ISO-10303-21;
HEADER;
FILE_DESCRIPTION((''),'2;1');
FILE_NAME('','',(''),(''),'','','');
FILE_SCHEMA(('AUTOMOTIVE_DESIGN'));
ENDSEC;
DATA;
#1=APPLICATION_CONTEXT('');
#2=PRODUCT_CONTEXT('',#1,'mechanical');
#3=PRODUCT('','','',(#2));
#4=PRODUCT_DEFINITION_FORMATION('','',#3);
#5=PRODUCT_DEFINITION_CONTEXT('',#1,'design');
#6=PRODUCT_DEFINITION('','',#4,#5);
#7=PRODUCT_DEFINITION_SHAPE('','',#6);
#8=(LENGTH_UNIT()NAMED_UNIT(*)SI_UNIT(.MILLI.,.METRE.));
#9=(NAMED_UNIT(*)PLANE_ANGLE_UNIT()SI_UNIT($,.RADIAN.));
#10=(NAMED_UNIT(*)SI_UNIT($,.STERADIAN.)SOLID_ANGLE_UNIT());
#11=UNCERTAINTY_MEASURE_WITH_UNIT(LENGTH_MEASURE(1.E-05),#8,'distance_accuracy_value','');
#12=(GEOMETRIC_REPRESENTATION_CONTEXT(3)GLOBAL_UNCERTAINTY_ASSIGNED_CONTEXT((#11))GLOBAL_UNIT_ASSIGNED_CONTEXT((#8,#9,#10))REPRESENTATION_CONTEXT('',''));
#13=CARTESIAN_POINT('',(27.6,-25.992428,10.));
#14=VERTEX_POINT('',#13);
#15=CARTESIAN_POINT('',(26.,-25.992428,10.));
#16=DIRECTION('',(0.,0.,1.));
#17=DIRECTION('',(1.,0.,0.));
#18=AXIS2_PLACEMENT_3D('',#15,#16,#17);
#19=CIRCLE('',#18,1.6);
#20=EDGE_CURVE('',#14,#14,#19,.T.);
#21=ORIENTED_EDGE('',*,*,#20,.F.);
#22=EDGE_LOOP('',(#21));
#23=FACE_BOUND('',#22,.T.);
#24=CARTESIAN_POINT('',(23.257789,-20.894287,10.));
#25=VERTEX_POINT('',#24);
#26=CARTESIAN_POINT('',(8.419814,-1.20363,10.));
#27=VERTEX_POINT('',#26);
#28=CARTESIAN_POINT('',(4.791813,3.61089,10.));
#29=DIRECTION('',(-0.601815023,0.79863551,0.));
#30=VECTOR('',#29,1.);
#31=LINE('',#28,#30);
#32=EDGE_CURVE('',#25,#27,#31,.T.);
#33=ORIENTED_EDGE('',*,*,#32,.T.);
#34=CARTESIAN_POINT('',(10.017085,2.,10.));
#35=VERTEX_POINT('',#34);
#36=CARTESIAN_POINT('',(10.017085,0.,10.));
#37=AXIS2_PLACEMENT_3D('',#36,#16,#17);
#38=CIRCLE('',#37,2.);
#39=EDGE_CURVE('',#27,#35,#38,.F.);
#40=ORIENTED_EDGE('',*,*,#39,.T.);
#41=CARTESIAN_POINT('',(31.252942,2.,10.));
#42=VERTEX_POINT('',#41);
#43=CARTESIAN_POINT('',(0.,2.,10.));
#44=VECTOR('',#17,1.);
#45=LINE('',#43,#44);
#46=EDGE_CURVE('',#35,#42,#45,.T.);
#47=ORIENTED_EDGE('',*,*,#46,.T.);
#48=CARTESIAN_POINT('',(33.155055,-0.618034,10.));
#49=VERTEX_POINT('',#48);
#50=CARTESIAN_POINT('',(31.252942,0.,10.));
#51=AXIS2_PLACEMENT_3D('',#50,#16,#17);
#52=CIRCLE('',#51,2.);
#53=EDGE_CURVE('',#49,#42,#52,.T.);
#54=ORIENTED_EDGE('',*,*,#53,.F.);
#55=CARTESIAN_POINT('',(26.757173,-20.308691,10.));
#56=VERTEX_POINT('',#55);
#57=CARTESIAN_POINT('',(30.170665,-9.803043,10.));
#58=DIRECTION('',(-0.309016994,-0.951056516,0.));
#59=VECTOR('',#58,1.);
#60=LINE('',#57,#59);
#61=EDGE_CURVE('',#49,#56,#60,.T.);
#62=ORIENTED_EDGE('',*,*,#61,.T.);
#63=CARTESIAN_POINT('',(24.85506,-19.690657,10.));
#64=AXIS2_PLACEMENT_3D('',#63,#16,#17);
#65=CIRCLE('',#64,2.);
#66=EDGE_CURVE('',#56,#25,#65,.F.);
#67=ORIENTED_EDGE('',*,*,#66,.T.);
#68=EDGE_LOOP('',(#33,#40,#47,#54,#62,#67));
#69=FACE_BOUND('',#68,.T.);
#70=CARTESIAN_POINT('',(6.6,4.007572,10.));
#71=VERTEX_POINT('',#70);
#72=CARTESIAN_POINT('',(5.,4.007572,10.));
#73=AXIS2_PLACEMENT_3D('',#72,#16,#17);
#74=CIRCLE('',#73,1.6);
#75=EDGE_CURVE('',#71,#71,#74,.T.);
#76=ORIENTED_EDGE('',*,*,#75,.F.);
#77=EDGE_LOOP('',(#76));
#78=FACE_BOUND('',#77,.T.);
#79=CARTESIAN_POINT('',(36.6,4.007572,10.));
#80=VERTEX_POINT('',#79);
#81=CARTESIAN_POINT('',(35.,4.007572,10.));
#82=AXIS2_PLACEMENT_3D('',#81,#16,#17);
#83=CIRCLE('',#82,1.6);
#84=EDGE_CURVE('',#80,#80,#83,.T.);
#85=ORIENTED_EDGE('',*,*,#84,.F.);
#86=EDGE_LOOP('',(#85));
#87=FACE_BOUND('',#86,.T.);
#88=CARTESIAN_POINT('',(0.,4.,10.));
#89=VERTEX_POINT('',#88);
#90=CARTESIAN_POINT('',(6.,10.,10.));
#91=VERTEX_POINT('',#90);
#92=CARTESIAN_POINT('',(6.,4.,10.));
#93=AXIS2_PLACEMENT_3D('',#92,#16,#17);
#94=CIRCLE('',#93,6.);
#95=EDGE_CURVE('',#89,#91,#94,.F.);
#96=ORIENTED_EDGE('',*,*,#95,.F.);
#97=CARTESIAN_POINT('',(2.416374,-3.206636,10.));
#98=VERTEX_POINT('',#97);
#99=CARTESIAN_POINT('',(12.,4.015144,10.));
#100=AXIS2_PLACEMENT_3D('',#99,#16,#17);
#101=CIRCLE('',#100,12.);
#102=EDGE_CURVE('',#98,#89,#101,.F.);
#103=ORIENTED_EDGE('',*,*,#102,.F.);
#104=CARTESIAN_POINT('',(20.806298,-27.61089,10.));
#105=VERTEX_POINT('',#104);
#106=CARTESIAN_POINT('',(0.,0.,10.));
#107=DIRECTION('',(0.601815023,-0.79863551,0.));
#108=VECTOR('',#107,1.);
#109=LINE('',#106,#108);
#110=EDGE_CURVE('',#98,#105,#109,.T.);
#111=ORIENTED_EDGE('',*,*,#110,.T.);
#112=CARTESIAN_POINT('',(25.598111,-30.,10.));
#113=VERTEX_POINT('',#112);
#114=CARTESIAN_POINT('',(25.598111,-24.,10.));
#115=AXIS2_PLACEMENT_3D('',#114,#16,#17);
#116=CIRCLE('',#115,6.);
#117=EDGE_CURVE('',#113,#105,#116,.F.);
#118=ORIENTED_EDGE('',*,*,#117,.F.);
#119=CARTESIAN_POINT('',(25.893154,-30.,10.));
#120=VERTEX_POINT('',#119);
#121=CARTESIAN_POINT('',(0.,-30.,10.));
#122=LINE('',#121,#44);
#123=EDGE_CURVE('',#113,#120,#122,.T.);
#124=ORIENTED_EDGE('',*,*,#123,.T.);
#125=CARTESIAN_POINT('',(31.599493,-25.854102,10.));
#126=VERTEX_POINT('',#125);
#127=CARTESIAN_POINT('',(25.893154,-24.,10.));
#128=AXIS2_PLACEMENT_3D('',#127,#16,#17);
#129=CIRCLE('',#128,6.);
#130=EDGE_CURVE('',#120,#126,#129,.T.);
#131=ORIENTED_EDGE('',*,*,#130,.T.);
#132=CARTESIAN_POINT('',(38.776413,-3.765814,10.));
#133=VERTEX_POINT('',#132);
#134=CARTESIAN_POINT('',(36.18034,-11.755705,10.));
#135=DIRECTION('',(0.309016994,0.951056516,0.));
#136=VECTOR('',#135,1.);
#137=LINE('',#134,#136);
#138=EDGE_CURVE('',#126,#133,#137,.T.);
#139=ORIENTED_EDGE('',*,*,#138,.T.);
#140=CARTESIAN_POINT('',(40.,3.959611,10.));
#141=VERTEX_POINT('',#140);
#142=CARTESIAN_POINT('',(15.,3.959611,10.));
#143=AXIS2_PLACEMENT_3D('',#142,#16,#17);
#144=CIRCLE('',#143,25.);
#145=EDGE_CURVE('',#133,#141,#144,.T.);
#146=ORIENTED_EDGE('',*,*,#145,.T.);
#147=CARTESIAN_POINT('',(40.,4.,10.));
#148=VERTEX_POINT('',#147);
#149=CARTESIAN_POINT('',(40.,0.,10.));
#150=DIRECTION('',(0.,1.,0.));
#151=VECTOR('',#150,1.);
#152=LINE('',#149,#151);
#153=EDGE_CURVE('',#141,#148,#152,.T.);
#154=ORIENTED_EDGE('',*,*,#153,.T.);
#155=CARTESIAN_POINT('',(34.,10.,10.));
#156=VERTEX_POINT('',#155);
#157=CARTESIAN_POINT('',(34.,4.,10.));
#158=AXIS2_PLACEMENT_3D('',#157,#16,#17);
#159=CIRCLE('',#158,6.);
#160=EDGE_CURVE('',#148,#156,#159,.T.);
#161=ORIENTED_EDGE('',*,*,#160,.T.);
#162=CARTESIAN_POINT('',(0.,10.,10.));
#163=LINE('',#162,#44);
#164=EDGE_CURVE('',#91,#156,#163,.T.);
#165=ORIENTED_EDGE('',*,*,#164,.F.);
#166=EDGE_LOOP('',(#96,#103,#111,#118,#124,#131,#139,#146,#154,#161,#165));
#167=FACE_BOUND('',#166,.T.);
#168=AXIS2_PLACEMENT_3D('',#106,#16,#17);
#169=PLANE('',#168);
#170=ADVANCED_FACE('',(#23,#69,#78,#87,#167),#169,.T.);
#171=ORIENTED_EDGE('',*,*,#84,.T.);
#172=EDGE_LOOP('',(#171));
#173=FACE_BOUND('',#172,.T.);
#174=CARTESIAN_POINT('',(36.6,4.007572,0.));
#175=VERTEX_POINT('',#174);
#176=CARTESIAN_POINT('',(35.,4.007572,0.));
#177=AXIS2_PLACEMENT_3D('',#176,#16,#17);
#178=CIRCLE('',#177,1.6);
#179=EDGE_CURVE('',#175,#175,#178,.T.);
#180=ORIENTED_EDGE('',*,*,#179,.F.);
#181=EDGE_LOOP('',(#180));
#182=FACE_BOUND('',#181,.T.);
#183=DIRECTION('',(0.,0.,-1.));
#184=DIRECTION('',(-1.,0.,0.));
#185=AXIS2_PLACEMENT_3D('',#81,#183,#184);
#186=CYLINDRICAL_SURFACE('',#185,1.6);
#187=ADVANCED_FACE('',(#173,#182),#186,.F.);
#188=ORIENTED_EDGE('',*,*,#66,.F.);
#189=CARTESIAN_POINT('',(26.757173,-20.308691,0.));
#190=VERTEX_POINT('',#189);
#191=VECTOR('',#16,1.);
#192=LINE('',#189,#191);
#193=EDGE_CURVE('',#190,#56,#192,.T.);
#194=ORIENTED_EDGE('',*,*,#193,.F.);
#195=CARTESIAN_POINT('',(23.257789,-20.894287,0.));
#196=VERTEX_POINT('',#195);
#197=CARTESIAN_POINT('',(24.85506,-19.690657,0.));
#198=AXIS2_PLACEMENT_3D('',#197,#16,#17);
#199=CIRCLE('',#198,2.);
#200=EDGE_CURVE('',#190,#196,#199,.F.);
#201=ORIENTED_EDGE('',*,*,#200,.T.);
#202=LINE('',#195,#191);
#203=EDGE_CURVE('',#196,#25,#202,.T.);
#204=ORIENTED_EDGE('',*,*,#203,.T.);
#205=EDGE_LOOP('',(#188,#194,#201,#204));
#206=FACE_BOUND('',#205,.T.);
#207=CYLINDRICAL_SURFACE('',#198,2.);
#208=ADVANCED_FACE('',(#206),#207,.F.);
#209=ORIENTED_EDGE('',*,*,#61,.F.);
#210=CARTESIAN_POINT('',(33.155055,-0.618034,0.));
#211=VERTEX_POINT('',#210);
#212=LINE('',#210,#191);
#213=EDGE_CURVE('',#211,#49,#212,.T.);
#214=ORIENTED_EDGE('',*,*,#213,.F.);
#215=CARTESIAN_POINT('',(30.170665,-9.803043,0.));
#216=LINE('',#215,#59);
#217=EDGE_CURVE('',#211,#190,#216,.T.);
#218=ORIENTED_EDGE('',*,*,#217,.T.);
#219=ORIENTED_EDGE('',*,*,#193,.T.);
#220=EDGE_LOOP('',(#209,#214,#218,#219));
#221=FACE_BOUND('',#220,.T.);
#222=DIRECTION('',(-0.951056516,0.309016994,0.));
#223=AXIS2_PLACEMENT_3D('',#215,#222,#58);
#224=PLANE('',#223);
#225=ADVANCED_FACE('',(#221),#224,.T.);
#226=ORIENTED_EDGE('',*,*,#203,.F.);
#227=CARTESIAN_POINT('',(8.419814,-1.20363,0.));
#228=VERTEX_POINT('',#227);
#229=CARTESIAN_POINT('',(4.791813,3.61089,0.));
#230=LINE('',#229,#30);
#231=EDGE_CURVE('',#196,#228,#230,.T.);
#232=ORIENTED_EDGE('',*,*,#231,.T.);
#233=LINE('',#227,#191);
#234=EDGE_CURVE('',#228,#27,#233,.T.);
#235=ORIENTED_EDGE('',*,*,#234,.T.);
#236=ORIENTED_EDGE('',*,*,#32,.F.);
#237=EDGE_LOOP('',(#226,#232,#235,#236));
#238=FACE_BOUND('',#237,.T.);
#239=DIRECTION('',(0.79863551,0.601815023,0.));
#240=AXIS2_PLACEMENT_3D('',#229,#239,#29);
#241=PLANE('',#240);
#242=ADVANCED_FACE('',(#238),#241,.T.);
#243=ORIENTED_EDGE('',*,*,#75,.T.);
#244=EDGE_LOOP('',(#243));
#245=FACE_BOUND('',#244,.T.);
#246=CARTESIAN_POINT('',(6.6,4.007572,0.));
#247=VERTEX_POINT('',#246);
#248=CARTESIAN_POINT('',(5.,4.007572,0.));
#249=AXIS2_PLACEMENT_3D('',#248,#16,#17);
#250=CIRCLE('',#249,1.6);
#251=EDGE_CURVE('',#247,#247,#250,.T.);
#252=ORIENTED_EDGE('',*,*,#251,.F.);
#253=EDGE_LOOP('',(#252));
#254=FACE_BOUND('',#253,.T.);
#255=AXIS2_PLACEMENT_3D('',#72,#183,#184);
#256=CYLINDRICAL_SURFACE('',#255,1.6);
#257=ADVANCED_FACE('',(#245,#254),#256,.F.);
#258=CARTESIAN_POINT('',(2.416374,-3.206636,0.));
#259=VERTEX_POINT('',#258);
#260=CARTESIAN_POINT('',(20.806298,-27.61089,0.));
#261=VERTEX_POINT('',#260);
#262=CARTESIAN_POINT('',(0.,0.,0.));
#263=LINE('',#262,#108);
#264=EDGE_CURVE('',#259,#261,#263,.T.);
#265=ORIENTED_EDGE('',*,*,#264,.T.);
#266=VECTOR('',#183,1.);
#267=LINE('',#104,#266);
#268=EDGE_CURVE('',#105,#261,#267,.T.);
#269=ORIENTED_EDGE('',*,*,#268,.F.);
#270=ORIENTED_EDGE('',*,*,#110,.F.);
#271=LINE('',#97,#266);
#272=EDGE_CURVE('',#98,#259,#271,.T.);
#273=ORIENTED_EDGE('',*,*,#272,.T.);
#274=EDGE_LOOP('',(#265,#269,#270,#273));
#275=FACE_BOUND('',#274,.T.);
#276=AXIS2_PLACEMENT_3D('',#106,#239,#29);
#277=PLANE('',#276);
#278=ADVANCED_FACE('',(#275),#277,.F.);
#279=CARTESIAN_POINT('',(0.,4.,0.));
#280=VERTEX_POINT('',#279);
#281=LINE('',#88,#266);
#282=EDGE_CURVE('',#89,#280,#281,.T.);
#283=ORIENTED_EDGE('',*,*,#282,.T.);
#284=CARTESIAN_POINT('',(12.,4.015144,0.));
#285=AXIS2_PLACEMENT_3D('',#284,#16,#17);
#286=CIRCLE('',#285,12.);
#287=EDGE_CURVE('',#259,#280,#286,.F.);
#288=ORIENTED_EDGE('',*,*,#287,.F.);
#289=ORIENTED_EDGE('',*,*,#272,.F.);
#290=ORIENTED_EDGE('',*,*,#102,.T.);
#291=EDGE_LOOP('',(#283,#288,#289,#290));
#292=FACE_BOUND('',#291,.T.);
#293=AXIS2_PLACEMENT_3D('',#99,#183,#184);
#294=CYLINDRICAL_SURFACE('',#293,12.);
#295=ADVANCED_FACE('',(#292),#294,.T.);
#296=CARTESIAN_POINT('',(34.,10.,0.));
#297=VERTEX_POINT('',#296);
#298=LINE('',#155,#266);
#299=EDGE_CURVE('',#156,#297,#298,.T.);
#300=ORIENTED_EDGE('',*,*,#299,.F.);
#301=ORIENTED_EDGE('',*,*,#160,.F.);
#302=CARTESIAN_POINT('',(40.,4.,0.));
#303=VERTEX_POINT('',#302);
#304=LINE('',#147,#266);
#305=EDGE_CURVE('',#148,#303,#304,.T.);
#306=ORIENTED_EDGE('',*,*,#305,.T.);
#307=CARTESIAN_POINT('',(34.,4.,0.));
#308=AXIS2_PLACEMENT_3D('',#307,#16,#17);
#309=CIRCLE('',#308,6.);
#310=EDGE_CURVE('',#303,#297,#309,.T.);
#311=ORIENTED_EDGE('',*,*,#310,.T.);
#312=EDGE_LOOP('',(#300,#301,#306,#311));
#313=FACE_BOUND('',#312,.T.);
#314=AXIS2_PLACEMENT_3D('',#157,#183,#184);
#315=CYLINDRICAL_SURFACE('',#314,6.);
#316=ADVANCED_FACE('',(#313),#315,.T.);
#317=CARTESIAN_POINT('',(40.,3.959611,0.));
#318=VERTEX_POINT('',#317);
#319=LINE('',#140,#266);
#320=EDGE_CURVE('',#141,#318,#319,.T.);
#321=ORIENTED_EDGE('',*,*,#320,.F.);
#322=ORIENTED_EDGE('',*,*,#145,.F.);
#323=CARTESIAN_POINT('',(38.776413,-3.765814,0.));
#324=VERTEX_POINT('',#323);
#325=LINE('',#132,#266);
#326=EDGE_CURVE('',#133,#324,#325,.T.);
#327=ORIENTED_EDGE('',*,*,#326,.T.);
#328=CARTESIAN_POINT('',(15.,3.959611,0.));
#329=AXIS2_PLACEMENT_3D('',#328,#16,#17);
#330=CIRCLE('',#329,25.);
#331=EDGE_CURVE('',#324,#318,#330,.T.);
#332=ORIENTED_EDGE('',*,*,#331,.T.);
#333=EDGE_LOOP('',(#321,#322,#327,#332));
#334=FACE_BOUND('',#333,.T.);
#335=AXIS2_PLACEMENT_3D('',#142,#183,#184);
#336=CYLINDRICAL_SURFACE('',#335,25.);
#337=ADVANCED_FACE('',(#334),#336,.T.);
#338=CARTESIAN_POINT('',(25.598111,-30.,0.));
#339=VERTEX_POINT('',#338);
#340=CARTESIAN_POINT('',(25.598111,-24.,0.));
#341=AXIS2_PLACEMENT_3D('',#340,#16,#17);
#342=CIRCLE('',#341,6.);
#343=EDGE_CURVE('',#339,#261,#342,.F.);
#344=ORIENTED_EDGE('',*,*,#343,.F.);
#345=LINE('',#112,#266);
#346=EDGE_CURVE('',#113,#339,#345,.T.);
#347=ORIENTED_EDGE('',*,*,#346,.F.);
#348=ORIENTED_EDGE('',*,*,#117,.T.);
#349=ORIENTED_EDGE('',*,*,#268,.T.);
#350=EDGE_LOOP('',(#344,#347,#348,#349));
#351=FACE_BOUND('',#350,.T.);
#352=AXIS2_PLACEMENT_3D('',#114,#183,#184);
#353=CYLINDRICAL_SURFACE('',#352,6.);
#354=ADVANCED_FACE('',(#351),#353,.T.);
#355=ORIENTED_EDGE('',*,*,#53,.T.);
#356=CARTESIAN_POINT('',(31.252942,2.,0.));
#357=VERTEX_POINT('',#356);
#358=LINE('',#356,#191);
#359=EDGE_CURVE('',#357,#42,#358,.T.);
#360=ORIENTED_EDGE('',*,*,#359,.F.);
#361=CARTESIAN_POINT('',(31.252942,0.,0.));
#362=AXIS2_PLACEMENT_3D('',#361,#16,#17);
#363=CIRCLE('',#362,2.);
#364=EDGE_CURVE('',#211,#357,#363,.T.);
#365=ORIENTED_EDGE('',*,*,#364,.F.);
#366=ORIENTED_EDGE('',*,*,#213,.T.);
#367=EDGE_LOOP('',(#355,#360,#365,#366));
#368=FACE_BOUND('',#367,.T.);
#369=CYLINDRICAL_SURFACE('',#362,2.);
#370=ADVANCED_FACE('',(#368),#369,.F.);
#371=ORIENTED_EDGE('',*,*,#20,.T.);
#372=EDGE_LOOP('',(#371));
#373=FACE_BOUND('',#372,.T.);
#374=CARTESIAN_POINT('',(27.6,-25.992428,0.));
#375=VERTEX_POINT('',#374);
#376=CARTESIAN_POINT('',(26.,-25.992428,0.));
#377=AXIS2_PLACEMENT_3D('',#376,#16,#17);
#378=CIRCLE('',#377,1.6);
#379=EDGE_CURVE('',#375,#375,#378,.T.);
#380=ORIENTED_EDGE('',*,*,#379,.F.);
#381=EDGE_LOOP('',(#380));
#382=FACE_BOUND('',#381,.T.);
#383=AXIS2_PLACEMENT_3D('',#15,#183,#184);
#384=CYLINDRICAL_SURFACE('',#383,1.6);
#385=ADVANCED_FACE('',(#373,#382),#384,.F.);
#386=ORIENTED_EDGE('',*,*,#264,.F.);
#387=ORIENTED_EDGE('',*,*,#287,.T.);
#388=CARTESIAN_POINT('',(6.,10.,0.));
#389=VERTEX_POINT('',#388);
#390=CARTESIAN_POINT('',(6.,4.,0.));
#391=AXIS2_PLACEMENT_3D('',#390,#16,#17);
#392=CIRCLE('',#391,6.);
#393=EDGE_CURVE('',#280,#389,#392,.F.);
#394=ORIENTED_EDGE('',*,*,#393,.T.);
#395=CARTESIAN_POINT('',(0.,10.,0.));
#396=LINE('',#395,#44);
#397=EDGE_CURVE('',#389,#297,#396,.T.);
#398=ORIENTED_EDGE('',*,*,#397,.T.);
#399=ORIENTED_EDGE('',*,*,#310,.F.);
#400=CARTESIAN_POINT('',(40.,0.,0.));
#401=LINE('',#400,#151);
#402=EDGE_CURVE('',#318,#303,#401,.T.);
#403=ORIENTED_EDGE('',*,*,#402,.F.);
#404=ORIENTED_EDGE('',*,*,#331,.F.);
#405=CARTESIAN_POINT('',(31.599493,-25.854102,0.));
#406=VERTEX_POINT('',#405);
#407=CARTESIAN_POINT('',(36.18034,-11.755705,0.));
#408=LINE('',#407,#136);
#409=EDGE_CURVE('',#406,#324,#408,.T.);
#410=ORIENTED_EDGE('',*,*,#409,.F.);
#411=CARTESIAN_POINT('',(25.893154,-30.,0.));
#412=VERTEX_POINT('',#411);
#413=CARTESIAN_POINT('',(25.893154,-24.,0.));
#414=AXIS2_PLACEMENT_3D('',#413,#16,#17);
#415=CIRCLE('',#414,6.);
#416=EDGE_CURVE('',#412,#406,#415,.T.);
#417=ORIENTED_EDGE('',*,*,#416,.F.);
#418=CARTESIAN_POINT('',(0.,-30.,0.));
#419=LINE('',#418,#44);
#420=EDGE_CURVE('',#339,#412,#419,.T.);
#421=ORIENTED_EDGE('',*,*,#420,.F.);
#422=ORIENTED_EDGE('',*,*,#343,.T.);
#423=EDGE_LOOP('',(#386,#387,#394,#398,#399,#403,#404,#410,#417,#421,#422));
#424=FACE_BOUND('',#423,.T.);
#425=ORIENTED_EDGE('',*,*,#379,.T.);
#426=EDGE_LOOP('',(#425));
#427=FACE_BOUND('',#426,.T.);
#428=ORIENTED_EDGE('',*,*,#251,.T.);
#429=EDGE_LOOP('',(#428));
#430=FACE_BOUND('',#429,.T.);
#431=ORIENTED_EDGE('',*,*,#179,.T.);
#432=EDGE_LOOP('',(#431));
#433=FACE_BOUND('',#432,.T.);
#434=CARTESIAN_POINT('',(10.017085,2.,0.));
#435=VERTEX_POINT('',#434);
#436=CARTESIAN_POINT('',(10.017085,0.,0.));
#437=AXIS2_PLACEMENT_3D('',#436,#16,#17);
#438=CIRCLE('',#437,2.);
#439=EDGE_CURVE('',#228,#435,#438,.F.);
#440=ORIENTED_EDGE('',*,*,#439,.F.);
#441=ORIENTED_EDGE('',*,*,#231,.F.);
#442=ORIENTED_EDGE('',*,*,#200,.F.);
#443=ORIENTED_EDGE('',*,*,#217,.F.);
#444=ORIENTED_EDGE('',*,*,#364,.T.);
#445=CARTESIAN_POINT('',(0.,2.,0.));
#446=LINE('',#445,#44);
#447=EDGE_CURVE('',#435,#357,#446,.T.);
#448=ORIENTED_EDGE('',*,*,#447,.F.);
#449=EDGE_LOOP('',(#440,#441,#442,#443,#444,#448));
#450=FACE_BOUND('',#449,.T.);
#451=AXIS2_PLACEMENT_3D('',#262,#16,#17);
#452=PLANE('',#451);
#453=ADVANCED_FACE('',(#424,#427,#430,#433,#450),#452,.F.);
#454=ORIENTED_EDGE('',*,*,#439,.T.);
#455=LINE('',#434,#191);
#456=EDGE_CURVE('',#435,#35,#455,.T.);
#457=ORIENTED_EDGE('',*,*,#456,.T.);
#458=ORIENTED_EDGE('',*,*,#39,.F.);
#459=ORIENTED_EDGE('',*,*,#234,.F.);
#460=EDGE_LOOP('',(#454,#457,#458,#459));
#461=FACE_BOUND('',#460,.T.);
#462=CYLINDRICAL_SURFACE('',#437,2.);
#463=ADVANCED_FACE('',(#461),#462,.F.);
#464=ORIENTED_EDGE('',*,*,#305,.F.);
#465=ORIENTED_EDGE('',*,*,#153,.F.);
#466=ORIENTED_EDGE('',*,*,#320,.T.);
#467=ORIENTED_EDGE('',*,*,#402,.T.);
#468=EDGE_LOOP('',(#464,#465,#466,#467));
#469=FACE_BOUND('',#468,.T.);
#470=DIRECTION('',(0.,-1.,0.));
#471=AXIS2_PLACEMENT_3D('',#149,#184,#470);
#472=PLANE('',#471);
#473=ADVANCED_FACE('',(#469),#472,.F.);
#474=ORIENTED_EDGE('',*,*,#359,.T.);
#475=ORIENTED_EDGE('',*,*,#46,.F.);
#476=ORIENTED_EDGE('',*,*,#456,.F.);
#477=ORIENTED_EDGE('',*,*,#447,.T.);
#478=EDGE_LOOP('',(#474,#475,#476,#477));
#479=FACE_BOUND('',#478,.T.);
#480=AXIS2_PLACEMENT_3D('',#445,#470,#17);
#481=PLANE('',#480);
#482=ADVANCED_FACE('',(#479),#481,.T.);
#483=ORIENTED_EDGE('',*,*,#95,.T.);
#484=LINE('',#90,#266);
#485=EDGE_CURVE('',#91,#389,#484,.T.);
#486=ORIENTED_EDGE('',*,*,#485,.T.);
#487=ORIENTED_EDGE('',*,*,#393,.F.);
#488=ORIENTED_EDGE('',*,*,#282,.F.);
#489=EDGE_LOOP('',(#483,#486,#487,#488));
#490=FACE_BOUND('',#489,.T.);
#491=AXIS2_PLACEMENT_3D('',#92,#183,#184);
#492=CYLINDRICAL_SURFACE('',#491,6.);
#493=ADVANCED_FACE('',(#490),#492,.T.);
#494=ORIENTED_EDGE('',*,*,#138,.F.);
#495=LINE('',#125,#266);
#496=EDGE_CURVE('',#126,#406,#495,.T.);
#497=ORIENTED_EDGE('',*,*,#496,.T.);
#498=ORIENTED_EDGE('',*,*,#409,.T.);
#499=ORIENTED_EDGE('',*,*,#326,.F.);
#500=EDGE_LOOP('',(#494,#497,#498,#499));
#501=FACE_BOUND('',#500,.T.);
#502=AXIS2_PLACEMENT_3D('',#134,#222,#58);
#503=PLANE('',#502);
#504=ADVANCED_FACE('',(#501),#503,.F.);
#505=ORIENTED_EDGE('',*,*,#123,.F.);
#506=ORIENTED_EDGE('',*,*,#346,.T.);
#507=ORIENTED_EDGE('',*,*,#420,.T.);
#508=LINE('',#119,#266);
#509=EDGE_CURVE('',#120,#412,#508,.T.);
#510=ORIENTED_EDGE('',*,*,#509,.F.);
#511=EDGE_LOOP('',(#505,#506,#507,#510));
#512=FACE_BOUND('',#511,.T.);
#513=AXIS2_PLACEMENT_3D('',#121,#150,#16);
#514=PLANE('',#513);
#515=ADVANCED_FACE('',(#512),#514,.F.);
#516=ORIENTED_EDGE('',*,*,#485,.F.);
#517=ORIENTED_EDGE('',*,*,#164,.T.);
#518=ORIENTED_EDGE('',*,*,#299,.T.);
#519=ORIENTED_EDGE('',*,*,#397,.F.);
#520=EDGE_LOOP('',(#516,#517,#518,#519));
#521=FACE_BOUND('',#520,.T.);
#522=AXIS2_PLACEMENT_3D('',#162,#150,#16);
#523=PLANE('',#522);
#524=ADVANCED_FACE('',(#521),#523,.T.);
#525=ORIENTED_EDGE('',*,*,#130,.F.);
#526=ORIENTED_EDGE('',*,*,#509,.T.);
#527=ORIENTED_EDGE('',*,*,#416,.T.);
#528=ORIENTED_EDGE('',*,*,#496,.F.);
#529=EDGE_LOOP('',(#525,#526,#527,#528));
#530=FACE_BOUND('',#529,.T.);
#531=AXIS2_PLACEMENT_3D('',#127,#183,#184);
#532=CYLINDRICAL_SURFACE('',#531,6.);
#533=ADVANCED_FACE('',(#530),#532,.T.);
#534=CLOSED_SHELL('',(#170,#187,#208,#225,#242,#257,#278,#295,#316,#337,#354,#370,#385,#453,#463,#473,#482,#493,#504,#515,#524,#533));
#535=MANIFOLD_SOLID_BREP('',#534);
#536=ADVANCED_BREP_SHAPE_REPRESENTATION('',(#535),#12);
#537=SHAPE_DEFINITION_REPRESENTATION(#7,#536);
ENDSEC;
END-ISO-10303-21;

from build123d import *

# Parameters (mm, degrees)
EXTRUDE_1_OUTLINE_R = 1.6
EXTRUDE_1_DEPTH     = 10
CUT_EXTRUDE_2_DEPTH = 10


# Read off the part's stored shape, not the designer's step: 凸台-拉伸1
with BuildPart() as part:
    # 凸台-拉伸1 outline → 凸台-拉伸1 (new body)
    with BuildSketch(Plane.XY):
        with BuildLine():
            Line((31.599493043, -25.854101966), (38.776412907, -3.765813851))
            ThreePointArc((38.776412907, -3.765813851), (39.692208515, 0.048749382), (40, 3.959611008))
            Line((40, 3.959611008), (40, 4))
            ThreePointArc((40, 4), (38.242640687, 8.242640687), (34, 10))
            Line((34, 10), (6, 10))
            ThreePointArc((6, 10), (1.757359313, 8.242640687), (0, 4))
            ThreePointArc((0, 4), (0.622521006, 0.200308091), (2.416373879, -3.206636444))
            Line((2.416373879, -3.206636444), (20.806298091, -27.610890139))
            ThreePointArc((20.806298091, -27.610890139), (22.920924272, -29.36960617), (25.598111151, -30))
            Line((25.598111151, -30), (25.893153945, -30))
            ThreePointArc((25.893153945, -30), (29.419865459, -28.854101966), (31.599493043, -25.854101966))
        make_face()
        with Locations((26, -25.992428083)):
            Circle(EXTRUDE_1_OUTLINE_R, mode=Mode.SUBTRACT)
        with Locations((5, 4.007571917)):
            Circle(EXTRUDE_1_OUTLINE_R, mode=Mode.SUBTRACT)
        with Locations((35, 4.007571917)):
            Circle(EXTRUDE_1_OUTLINE_R, mode=Mode.SUBTRACT)
    extrude(amount=EXTRUDE_1_DEPTH)

    # 草图3 → 切除-拉伸2 (cut)
    with BuildSketch(Plane.XY.offset(10)):
        with BuildLine():
            ThreePointArc((8.419814245, -1.203630046), (8.227216542, 0.892395626), (10.017085265, 2))
            Line((10.017085265, 2), (31.252942008, 2))
            ThreePointArc((31.252942008, 2), (32.870975997, 1.175570505), (33.15505504, -0.618033989))
            Line((33.15505504, -0.618033989), (26.757172713, -20.3086911))
            ThreePointArc((26.757172713, -20.3086911), (25.185154892, -21.663228314), (23.25778866, -20.894287158))
            Line((23.25778866, -20.894287158), (8.419814245, -1.203630046))
        make_face()
    extrude(amount=-CUT_EXTRUDE_2_DEPTH, mode=Mode.SUBTRACT)


solid = part.part
